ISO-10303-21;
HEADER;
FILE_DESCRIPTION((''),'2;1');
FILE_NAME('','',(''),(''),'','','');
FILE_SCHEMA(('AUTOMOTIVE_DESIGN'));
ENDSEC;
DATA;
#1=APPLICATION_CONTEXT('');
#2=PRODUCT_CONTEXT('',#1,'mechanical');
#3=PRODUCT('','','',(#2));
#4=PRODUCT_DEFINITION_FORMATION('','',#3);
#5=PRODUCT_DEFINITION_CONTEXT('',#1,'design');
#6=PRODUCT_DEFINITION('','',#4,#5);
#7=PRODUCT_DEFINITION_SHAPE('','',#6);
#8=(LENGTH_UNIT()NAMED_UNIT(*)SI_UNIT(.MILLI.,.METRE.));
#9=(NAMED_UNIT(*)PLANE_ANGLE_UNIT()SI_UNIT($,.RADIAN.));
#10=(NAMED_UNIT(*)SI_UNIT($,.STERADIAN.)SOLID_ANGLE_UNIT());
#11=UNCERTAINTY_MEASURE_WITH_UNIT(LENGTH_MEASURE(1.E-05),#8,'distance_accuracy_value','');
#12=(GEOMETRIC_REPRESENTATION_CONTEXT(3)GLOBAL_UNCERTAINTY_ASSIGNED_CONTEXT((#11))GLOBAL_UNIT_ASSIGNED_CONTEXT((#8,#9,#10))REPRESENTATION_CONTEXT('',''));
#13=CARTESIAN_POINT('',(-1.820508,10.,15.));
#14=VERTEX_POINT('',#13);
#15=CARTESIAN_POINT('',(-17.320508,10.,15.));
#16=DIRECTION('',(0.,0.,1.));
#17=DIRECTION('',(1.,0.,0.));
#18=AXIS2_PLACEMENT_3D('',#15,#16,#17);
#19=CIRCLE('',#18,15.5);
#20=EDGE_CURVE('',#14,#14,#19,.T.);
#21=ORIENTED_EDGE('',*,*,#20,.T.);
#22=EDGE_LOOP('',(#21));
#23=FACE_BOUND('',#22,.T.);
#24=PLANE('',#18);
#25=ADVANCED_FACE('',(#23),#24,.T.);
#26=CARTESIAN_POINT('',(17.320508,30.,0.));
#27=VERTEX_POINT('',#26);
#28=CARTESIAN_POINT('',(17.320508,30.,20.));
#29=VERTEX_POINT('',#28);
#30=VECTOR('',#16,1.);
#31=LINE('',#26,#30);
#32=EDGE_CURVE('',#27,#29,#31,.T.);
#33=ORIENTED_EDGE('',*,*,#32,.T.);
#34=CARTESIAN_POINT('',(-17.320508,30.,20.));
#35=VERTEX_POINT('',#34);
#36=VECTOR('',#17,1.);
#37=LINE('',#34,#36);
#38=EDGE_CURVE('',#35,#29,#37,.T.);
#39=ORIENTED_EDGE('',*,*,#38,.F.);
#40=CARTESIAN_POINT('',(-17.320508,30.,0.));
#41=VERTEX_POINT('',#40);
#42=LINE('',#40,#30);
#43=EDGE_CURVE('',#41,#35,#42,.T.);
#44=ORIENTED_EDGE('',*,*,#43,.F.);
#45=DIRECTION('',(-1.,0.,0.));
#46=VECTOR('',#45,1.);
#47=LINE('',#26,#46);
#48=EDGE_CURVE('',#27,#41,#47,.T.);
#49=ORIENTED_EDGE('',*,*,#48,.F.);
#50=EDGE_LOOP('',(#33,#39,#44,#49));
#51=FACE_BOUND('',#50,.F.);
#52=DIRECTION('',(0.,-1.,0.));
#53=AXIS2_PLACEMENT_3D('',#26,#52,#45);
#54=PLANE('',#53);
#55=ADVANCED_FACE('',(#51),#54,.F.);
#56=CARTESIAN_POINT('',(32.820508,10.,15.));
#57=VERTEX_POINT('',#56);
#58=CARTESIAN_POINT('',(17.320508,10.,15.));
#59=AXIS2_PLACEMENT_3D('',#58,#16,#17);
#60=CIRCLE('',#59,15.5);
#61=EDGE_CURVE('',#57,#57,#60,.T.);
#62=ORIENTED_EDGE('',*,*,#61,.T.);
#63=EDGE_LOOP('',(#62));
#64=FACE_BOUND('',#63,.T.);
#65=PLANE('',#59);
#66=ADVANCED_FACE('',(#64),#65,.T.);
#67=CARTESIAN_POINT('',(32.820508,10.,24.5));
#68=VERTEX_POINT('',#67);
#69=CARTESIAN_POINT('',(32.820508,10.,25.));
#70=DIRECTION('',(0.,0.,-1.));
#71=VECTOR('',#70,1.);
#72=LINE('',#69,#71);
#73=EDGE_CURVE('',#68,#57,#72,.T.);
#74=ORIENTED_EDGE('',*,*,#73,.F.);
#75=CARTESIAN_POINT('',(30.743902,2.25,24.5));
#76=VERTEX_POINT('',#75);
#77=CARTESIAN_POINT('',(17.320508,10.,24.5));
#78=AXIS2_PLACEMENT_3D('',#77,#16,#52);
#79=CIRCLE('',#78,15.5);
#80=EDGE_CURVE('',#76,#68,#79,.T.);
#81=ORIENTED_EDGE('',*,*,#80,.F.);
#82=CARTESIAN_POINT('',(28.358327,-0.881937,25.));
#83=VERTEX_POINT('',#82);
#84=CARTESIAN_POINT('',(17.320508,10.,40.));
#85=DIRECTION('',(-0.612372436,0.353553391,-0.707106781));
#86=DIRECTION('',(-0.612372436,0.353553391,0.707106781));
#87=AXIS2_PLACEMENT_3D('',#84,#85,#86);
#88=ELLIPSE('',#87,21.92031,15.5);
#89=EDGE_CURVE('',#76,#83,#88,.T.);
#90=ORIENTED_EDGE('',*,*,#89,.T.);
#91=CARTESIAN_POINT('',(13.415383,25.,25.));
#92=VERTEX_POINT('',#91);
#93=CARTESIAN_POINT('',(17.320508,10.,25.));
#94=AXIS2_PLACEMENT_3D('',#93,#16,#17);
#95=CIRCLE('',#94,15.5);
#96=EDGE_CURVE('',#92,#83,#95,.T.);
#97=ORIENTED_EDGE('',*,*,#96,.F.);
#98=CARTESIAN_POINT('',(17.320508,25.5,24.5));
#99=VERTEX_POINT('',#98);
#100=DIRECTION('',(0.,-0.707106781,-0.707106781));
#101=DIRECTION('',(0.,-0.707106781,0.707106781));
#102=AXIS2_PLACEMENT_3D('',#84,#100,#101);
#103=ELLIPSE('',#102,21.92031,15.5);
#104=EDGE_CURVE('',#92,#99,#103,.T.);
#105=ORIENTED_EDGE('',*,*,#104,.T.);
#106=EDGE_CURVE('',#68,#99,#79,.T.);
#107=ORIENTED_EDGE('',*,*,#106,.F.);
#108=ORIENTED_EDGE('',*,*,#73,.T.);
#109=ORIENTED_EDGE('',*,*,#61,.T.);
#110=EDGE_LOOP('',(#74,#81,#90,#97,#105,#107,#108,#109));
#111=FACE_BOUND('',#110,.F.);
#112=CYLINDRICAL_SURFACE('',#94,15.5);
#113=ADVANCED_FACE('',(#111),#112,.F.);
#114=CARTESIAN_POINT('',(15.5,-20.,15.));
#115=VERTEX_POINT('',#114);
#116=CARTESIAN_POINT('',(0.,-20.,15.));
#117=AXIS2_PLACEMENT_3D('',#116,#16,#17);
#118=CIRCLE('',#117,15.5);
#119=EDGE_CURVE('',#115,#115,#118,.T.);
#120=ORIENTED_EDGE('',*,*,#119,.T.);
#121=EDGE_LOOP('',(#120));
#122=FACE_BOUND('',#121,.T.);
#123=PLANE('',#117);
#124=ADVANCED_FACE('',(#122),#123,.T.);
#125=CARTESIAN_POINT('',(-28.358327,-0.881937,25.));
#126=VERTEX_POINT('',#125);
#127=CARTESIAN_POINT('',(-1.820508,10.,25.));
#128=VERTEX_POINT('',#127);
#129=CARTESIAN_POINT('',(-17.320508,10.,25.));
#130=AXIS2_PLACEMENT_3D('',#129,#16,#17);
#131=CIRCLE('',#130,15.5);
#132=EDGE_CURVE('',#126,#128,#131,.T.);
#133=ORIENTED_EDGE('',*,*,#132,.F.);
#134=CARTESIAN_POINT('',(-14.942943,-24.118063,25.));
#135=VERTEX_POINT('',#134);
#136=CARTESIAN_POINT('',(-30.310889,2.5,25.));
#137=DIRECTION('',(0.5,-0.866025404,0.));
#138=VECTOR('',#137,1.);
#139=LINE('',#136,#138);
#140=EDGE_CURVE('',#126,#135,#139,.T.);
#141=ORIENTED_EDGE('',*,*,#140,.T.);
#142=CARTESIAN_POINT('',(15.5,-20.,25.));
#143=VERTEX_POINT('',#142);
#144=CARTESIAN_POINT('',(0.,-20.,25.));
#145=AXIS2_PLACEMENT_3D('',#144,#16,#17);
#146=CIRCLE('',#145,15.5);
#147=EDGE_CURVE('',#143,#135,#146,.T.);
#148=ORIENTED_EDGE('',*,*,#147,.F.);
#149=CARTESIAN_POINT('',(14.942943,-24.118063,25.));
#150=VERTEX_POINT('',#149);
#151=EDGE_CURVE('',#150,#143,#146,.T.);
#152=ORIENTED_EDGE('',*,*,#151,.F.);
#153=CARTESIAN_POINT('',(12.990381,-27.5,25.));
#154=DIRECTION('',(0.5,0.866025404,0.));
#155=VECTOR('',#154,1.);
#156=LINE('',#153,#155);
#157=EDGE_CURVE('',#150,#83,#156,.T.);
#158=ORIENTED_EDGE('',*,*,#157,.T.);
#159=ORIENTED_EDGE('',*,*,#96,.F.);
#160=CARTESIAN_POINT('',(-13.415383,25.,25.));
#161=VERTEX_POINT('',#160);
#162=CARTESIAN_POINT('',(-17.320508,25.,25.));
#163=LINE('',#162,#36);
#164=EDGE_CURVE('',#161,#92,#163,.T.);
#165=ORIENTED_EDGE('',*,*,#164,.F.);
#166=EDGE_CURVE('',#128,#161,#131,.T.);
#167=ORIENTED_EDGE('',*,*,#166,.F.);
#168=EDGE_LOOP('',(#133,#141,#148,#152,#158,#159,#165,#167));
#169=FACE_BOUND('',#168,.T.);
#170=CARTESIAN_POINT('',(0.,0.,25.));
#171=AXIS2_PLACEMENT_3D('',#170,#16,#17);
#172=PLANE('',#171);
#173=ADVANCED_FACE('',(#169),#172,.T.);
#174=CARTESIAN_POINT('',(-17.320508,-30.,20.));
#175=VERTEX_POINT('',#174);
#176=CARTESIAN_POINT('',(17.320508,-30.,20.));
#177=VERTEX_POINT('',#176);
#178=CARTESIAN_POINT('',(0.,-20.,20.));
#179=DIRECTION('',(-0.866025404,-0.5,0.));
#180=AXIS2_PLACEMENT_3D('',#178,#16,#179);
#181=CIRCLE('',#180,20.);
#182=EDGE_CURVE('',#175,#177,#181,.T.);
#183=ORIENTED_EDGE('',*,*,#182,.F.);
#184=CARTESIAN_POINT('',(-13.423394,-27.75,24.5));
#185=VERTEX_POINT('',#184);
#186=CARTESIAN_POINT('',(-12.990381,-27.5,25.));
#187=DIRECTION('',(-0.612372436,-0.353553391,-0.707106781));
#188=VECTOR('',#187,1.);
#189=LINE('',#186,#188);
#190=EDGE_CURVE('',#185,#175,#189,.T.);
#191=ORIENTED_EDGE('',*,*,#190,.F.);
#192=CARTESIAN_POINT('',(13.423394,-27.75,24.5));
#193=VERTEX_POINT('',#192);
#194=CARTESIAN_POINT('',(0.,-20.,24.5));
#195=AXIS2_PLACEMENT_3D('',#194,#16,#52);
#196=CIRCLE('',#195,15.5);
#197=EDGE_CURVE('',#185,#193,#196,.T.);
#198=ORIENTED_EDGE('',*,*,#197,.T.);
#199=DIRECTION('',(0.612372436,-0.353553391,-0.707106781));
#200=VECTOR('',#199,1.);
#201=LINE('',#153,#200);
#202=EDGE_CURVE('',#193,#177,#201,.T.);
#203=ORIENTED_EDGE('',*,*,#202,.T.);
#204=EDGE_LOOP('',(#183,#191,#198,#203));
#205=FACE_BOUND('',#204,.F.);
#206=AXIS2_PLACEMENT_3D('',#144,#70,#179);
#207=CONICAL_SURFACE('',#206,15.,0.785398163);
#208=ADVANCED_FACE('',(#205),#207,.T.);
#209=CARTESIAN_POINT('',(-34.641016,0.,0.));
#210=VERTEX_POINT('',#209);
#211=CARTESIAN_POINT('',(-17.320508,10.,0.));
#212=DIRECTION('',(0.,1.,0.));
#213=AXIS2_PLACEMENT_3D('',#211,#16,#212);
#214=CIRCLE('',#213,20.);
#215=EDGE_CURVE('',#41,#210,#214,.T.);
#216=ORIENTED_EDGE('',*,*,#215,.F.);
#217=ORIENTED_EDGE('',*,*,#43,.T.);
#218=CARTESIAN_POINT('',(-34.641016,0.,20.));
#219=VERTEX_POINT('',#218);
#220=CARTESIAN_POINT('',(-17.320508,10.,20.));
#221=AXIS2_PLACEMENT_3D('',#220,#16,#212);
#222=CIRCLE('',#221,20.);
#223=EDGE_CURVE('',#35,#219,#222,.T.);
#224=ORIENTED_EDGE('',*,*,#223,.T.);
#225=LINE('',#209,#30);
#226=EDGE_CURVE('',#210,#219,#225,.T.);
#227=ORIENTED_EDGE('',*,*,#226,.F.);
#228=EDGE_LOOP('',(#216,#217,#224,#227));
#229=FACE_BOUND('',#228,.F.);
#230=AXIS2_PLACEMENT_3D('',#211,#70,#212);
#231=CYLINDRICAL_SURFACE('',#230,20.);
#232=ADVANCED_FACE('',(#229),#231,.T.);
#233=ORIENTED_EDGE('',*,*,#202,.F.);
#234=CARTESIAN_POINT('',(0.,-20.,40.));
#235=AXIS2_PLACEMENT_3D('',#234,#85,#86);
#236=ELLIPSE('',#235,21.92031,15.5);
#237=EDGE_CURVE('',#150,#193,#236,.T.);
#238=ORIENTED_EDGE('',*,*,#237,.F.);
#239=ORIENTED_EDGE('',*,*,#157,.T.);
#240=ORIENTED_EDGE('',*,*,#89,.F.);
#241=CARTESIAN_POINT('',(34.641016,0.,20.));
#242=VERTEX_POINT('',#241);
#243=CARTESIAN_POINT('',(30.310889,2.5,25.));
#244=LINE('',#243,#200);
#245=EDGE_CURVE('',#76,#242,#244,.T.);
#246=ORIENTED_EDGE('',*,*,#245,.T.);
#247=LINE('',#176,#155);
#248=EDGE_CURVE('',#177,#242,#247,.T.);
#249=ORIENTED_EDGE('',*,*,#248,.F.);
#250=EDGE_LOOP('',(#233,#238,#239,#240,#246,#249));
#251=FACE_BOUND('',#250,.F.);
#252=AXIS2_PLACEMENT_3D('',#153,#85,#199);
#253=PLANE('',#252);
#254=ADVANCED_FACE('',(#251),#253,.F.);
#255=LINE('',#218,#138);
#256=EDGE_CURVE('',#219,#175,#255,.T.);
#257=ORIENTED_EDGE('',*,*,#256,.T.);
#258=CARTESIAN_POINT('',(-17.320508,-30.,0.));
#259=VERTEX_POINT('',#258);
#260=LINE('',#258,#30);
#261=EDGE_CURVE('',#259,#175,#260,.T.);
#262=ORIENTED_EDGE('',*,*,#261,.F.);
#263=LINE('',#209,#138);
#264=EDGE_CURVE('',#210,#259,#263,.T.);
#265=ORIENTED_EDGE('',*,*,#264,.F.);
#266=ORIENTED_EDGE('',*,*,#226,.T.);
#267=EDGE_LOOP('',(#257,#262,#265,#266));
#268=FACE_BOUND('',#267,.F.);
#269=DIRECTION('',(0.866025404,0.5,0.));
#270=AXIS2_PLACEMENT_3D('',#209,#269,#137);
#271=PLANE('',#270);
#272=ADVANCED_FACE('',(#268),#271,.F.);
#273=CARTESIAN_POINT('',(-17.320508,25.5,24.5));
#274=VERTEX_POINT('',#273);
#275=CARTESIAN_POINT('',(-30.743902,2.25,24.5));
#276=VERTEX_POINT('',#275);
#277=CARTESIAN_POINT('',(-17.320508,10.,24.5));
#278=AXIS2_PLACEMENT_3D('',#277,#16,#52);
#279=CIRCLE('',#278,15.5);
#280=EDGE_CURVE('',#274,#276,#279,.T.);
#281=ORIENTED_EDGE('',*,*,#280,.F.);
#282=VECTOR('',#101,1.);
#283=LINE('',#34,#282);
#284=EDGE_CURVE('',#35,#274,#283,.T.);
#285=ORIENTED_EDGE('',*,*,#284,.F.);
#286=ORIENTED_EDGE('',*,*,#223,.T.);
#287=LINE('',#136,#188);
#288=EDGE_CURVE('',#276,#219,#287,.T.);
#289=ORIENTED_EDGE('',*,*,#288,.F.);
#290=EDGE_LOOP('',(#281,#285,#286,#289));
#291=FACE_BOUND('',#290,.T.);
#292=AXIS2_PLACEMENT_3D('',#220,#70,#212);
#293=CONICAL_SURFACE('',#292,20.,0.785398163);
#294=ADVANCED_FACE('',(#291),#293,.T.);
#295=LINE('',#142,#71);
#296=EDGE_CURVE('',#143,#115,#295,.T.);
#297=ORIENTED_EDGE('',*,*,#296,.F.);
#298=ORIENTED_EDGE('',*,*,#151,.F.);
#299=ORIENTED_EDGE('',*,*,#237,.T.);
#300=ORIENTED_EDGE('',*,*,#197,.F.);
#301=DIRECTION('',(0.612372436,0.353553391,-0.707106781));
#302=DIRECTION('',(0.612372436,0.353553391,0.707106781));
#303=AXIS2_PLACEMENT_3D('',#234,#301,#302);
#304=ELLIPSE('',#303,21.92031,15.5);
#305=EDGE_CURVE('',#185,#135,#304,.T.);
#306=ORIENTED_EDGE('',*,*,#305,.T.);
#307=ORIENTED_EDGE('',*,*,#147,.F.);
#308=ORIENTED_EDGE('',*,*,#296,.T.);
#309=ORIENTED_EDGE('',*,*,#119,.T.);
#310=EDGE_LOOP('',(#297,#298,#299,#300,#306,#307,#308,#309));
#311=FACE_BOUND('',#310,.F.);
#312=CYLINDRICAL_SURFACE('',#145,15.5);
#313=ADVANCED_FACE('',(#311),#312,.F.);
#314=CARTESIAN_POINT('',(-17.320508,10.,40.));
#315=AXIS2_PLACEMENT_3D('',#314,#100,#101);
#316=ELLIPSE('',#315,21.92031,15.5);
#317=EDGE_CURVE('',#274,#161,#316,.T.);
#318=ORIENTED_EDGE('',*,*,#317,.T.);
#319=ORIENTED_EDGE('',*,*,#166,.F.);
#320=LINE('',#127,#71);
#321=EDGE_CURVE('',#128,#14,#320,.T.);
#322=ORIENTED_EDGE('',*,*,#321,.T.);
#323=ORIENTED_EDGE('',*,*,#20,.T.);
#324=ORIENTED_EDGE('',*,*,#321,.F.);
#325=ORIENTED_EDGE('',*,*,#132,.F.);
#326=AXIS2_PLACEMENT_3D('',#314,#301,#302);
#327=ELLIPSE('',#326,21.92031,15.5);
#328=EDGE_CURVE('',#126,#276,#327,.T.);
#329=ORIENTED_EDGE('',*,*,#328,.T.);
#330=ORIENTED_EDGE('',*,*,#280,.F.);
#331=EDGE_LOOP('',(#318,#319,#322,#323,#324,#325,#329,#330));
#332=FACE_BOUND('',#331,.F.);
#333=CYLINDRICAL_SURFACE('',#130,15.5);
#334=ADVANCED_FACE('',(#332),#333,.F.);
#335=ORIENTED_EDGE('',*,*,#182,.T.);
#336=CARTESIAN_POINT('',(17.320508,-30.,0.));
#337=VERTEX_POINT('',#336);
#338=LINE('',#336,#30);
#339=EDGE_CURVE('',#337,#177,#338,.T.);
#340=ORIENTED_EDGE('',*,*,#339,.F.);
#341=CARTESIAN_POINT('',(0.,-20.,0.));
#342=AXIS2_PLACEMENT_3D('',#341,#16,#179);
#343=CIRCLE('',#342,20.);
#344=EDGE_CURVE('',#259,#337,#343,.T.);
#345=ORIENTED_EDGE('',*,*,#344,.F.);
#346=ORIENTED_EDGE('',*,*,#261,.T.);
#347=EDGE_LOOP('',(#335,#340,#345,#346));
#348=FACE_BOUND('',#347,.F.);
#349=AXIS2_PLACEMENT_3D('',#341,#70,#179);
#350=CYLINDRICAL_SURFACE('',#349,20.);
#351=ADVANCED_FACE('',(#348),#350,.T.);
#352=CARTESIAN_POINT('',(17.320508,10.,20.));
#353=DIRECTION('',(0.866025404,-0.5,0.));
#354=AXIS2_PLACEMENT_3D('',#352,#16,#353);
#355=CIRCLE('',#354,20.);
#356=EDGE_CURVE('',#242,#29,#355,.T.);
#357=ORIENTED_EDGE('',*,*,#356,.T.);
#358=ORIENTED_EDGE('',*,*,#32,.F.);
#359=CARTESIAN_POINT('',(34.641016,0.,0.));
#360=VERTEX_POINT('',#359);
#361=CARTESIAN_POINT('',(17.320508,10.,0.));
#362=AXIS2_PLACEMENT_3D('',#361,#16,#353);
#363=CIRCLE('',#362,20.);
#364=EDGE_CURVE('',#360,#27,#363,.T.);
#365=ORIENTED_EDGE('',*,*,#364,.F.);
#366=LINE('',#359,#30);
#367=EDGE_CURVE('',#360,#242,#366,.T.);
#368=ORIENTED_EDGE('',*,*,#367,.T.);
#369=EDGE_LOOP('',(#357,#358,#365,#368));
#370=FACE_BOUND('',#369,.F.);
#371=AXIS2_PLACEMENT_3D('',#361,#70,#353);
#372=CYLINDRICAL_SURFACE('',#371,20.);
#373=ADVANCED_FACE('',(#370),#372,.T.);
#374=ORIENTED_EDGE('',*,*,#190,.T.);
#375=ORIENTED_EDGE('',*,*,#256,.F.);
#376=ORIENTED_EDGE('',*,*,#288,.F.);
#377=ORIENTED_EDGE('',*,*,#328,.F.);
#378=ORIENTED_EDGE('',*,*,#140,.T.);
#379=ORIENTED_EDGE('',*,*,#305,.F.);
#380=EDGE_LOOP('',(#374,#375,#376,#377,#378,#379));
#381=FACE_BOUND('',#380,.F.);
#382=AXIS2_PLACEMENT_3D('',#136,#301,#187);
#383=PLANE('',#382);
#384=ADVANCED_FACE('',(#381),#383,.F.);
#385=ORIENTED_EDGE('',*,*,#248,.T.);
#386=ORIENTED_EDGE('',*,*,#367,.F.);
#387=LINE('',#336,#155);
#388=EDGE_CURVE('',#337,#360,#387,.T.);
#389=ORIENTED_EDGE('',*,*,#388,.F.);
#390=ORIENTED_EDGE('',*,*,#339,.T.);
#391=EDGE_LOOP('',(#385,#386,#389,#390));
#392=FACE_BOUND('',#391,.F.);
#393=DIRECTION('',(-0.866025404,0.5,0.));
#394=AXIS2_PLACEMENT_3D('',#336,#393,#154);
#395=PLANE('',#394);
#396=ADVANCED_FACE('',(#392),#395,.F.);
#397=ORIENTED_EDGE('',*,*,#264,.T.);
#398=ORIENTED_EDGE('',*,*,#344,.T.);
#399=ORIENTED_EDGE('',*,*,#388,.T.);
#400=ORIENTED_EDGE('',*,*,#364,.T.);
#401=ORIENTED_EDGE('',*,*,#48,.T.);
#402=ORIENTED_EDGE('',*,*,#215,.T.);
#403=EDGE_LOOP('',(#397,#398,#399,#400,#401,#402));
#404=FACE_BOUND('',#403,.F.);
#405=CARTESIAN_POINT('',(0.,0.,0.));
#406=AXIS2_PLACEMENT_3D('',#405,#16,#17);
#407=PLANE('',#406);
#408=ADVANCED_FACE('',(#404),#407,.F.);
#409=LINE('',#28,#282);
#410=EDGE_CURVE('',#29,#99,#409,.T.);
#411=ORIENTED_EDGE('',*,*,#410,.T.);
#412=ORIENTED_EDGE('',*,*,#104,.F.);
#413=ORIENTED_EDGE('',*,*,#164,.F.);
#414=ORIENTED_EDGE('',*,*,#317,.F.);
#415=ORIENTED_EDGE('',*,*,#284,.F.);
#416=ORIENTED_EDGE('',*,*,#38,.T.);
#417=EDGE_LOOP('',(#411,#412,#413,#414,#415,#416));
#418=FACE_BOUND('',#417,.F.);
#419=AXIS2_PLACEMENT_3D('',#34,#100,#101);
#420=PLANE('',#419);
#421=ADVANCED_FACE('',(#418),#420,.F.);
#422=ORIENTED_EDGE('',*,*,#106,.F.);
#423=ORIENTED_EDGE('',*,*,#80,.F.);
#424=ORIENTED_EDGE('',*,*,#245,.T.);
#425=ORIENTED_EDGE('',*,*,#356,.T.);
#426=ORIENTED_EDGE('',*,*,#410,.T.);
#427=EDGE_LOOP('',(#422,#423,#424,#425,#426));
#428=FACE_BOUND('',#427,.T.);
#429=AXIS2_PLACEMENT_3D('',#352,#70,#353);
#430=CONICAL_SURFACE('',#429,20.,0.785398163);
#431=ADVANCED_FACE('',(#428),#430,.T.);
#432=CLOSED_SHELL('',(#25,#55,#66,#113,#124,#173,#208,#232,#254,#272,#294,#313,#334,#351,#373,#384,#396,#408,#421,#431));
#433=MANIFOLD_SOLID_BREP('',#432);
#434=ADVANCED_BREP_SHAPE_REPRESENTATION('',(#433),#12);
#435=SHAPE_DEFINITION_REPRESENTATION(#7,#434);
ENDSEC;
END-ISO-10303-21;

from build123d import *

# Parameters (mm, degrees)
F1_DEPTH     = 25
F2_R         = 15.5
F3_DEPTH     = 10
F4_T1_DEPTH  = 34.6410161514
F4_T3_DEPTH  = 34.6410161514
F4_T5_DEPTH  = 34.6410161514
F4_T8_ANGLE  = 120
F4_T10_ANGLE = 120
F4_T12_ANGLE = 120


# Not quite as in the source:
# - a fillet or chamfer that OpenCascade refuses, or shapes differently, is made with other operations: its cross-section is extruded or revolved along the edge and cut away or added


with BuildPart() as f1:
    # F0 (on Top) → F1 (new body)
    with BuildSketch(Plane.XY):
        with BuildLine():
            Line((17.3205080757, 30), (-17.3205080757, 30))
            ThreePointArc((-17.3205080757, 30), (-34.6410161514, 20), (-34.6410161514, 0))
            Line((-34.6410161514, 0), (-17.3205080757, -30))
            ThreePointArc((-17.3205080757, -30), (0, -40), (17.3205080757, -30))
            Line((17.3205080757, -30), (34.6410161514, 0))
            ThreePointArc((34.6410161514, 0), (34.6410161514, 20), (17.3205080757, 30))
        make_face()
    extrude(amount=F1_DEPTH)

    # F2 (on face) → F3 (cut)
    with BuildSketch(Plane.XY.offset(25)):
        with Locations((-17.3205080757, 10)):
            Circle(F2_R)
        with Locations((0, -20)):
            Circle(F2_R)
        with Locations((17.3205080757, 10)):
            Circle(F2_R)
    extrude(amount=-F3_DEPTH, mode=Mode.SUBTRACT)

    # F4: chamfer of 5 on 1 edges, made by hand

    # F4_s2 → F4_t1 (cut)
    with BuildSketch(Plane(origin=(-8.6602540378, -15, 0), x_dir=(0, 0, 1), z_dir=(0.5, 0.8660254038, 0))):
        Polygon((25, 25), (20, 30), (25, 30), align=None)
    extrude(amount=F4_T1_DEPTH, mode=Mode.SUBTRACT)

    # F4_s4 → F4_t3 (cut)
    with BuildSketch(Plane.YZ.offset(-17.3205080757)):
        Polygon((30, 20), (25, 25), (30, 25), align=None)
    extrude(amount=F4_T3_DEPTH, mode=Mode.SUBTRACT)

    # F4_s6 → F4_t5 (cut)
    with BuildSketch(Plane(origin=(-8.6602540378, 15, 0), x_dir=(0, 0, 1), z_dir=(0.5, -0.8660254038, 0))):
        Polygon((25, 25), (20, 30), (25, 30), align=None)
    extrude(amount=F4_T5_DEPTH, mode=Mode.SUBTRACT)

    # F4_s7 → F4_t8 (revolve, cut)
    with BuildSketch(Plane(origin=(8.6602540378, -15, 0), x_dir=(0, 0, 1), z_dir=(-0.5, 0.8660254038, 0))):
        Polygon((25, -25), (20, -30), (25, -30), align=None)
    revolve(axis=Axis((0, -20, 25), (0, 0, 1)), revolution_arc=F4_T8_ANGLE, mode=Mode.SUBTRACT)

    # F4_s9 → F4_t10 (revolve, cut)
    with BuildSketch(Plane(origin=(8.6602540378, 15, 0), x_dir=(0, 0, 1), z_dir=(-0.5, -0.8660254038, 0))):
        Polygon((20, -30), (25, -25), (25, -30), align=None)
    revolve(axis=Axis((17.3205080757, 10, 25), (0, 0, 1)), revolution_arc=F4_T10_ANGLE, mode=Mode.SUBTRACT)

    # F4_s11 → F4_t12 (revolve, cut)
    with BuildSketch(Plane.YZ.offset(-17.3205080757)):
        Polygon((30, 20), (25, 25), (30, 25), align=None)
    revolve(axis=Axis((-17.3205080757, 10, 25), (0, 0, 1)), revolution_arc=F4_T12_ANGLE, mode=Mode.SUBTRACT)


solid = f1.part
